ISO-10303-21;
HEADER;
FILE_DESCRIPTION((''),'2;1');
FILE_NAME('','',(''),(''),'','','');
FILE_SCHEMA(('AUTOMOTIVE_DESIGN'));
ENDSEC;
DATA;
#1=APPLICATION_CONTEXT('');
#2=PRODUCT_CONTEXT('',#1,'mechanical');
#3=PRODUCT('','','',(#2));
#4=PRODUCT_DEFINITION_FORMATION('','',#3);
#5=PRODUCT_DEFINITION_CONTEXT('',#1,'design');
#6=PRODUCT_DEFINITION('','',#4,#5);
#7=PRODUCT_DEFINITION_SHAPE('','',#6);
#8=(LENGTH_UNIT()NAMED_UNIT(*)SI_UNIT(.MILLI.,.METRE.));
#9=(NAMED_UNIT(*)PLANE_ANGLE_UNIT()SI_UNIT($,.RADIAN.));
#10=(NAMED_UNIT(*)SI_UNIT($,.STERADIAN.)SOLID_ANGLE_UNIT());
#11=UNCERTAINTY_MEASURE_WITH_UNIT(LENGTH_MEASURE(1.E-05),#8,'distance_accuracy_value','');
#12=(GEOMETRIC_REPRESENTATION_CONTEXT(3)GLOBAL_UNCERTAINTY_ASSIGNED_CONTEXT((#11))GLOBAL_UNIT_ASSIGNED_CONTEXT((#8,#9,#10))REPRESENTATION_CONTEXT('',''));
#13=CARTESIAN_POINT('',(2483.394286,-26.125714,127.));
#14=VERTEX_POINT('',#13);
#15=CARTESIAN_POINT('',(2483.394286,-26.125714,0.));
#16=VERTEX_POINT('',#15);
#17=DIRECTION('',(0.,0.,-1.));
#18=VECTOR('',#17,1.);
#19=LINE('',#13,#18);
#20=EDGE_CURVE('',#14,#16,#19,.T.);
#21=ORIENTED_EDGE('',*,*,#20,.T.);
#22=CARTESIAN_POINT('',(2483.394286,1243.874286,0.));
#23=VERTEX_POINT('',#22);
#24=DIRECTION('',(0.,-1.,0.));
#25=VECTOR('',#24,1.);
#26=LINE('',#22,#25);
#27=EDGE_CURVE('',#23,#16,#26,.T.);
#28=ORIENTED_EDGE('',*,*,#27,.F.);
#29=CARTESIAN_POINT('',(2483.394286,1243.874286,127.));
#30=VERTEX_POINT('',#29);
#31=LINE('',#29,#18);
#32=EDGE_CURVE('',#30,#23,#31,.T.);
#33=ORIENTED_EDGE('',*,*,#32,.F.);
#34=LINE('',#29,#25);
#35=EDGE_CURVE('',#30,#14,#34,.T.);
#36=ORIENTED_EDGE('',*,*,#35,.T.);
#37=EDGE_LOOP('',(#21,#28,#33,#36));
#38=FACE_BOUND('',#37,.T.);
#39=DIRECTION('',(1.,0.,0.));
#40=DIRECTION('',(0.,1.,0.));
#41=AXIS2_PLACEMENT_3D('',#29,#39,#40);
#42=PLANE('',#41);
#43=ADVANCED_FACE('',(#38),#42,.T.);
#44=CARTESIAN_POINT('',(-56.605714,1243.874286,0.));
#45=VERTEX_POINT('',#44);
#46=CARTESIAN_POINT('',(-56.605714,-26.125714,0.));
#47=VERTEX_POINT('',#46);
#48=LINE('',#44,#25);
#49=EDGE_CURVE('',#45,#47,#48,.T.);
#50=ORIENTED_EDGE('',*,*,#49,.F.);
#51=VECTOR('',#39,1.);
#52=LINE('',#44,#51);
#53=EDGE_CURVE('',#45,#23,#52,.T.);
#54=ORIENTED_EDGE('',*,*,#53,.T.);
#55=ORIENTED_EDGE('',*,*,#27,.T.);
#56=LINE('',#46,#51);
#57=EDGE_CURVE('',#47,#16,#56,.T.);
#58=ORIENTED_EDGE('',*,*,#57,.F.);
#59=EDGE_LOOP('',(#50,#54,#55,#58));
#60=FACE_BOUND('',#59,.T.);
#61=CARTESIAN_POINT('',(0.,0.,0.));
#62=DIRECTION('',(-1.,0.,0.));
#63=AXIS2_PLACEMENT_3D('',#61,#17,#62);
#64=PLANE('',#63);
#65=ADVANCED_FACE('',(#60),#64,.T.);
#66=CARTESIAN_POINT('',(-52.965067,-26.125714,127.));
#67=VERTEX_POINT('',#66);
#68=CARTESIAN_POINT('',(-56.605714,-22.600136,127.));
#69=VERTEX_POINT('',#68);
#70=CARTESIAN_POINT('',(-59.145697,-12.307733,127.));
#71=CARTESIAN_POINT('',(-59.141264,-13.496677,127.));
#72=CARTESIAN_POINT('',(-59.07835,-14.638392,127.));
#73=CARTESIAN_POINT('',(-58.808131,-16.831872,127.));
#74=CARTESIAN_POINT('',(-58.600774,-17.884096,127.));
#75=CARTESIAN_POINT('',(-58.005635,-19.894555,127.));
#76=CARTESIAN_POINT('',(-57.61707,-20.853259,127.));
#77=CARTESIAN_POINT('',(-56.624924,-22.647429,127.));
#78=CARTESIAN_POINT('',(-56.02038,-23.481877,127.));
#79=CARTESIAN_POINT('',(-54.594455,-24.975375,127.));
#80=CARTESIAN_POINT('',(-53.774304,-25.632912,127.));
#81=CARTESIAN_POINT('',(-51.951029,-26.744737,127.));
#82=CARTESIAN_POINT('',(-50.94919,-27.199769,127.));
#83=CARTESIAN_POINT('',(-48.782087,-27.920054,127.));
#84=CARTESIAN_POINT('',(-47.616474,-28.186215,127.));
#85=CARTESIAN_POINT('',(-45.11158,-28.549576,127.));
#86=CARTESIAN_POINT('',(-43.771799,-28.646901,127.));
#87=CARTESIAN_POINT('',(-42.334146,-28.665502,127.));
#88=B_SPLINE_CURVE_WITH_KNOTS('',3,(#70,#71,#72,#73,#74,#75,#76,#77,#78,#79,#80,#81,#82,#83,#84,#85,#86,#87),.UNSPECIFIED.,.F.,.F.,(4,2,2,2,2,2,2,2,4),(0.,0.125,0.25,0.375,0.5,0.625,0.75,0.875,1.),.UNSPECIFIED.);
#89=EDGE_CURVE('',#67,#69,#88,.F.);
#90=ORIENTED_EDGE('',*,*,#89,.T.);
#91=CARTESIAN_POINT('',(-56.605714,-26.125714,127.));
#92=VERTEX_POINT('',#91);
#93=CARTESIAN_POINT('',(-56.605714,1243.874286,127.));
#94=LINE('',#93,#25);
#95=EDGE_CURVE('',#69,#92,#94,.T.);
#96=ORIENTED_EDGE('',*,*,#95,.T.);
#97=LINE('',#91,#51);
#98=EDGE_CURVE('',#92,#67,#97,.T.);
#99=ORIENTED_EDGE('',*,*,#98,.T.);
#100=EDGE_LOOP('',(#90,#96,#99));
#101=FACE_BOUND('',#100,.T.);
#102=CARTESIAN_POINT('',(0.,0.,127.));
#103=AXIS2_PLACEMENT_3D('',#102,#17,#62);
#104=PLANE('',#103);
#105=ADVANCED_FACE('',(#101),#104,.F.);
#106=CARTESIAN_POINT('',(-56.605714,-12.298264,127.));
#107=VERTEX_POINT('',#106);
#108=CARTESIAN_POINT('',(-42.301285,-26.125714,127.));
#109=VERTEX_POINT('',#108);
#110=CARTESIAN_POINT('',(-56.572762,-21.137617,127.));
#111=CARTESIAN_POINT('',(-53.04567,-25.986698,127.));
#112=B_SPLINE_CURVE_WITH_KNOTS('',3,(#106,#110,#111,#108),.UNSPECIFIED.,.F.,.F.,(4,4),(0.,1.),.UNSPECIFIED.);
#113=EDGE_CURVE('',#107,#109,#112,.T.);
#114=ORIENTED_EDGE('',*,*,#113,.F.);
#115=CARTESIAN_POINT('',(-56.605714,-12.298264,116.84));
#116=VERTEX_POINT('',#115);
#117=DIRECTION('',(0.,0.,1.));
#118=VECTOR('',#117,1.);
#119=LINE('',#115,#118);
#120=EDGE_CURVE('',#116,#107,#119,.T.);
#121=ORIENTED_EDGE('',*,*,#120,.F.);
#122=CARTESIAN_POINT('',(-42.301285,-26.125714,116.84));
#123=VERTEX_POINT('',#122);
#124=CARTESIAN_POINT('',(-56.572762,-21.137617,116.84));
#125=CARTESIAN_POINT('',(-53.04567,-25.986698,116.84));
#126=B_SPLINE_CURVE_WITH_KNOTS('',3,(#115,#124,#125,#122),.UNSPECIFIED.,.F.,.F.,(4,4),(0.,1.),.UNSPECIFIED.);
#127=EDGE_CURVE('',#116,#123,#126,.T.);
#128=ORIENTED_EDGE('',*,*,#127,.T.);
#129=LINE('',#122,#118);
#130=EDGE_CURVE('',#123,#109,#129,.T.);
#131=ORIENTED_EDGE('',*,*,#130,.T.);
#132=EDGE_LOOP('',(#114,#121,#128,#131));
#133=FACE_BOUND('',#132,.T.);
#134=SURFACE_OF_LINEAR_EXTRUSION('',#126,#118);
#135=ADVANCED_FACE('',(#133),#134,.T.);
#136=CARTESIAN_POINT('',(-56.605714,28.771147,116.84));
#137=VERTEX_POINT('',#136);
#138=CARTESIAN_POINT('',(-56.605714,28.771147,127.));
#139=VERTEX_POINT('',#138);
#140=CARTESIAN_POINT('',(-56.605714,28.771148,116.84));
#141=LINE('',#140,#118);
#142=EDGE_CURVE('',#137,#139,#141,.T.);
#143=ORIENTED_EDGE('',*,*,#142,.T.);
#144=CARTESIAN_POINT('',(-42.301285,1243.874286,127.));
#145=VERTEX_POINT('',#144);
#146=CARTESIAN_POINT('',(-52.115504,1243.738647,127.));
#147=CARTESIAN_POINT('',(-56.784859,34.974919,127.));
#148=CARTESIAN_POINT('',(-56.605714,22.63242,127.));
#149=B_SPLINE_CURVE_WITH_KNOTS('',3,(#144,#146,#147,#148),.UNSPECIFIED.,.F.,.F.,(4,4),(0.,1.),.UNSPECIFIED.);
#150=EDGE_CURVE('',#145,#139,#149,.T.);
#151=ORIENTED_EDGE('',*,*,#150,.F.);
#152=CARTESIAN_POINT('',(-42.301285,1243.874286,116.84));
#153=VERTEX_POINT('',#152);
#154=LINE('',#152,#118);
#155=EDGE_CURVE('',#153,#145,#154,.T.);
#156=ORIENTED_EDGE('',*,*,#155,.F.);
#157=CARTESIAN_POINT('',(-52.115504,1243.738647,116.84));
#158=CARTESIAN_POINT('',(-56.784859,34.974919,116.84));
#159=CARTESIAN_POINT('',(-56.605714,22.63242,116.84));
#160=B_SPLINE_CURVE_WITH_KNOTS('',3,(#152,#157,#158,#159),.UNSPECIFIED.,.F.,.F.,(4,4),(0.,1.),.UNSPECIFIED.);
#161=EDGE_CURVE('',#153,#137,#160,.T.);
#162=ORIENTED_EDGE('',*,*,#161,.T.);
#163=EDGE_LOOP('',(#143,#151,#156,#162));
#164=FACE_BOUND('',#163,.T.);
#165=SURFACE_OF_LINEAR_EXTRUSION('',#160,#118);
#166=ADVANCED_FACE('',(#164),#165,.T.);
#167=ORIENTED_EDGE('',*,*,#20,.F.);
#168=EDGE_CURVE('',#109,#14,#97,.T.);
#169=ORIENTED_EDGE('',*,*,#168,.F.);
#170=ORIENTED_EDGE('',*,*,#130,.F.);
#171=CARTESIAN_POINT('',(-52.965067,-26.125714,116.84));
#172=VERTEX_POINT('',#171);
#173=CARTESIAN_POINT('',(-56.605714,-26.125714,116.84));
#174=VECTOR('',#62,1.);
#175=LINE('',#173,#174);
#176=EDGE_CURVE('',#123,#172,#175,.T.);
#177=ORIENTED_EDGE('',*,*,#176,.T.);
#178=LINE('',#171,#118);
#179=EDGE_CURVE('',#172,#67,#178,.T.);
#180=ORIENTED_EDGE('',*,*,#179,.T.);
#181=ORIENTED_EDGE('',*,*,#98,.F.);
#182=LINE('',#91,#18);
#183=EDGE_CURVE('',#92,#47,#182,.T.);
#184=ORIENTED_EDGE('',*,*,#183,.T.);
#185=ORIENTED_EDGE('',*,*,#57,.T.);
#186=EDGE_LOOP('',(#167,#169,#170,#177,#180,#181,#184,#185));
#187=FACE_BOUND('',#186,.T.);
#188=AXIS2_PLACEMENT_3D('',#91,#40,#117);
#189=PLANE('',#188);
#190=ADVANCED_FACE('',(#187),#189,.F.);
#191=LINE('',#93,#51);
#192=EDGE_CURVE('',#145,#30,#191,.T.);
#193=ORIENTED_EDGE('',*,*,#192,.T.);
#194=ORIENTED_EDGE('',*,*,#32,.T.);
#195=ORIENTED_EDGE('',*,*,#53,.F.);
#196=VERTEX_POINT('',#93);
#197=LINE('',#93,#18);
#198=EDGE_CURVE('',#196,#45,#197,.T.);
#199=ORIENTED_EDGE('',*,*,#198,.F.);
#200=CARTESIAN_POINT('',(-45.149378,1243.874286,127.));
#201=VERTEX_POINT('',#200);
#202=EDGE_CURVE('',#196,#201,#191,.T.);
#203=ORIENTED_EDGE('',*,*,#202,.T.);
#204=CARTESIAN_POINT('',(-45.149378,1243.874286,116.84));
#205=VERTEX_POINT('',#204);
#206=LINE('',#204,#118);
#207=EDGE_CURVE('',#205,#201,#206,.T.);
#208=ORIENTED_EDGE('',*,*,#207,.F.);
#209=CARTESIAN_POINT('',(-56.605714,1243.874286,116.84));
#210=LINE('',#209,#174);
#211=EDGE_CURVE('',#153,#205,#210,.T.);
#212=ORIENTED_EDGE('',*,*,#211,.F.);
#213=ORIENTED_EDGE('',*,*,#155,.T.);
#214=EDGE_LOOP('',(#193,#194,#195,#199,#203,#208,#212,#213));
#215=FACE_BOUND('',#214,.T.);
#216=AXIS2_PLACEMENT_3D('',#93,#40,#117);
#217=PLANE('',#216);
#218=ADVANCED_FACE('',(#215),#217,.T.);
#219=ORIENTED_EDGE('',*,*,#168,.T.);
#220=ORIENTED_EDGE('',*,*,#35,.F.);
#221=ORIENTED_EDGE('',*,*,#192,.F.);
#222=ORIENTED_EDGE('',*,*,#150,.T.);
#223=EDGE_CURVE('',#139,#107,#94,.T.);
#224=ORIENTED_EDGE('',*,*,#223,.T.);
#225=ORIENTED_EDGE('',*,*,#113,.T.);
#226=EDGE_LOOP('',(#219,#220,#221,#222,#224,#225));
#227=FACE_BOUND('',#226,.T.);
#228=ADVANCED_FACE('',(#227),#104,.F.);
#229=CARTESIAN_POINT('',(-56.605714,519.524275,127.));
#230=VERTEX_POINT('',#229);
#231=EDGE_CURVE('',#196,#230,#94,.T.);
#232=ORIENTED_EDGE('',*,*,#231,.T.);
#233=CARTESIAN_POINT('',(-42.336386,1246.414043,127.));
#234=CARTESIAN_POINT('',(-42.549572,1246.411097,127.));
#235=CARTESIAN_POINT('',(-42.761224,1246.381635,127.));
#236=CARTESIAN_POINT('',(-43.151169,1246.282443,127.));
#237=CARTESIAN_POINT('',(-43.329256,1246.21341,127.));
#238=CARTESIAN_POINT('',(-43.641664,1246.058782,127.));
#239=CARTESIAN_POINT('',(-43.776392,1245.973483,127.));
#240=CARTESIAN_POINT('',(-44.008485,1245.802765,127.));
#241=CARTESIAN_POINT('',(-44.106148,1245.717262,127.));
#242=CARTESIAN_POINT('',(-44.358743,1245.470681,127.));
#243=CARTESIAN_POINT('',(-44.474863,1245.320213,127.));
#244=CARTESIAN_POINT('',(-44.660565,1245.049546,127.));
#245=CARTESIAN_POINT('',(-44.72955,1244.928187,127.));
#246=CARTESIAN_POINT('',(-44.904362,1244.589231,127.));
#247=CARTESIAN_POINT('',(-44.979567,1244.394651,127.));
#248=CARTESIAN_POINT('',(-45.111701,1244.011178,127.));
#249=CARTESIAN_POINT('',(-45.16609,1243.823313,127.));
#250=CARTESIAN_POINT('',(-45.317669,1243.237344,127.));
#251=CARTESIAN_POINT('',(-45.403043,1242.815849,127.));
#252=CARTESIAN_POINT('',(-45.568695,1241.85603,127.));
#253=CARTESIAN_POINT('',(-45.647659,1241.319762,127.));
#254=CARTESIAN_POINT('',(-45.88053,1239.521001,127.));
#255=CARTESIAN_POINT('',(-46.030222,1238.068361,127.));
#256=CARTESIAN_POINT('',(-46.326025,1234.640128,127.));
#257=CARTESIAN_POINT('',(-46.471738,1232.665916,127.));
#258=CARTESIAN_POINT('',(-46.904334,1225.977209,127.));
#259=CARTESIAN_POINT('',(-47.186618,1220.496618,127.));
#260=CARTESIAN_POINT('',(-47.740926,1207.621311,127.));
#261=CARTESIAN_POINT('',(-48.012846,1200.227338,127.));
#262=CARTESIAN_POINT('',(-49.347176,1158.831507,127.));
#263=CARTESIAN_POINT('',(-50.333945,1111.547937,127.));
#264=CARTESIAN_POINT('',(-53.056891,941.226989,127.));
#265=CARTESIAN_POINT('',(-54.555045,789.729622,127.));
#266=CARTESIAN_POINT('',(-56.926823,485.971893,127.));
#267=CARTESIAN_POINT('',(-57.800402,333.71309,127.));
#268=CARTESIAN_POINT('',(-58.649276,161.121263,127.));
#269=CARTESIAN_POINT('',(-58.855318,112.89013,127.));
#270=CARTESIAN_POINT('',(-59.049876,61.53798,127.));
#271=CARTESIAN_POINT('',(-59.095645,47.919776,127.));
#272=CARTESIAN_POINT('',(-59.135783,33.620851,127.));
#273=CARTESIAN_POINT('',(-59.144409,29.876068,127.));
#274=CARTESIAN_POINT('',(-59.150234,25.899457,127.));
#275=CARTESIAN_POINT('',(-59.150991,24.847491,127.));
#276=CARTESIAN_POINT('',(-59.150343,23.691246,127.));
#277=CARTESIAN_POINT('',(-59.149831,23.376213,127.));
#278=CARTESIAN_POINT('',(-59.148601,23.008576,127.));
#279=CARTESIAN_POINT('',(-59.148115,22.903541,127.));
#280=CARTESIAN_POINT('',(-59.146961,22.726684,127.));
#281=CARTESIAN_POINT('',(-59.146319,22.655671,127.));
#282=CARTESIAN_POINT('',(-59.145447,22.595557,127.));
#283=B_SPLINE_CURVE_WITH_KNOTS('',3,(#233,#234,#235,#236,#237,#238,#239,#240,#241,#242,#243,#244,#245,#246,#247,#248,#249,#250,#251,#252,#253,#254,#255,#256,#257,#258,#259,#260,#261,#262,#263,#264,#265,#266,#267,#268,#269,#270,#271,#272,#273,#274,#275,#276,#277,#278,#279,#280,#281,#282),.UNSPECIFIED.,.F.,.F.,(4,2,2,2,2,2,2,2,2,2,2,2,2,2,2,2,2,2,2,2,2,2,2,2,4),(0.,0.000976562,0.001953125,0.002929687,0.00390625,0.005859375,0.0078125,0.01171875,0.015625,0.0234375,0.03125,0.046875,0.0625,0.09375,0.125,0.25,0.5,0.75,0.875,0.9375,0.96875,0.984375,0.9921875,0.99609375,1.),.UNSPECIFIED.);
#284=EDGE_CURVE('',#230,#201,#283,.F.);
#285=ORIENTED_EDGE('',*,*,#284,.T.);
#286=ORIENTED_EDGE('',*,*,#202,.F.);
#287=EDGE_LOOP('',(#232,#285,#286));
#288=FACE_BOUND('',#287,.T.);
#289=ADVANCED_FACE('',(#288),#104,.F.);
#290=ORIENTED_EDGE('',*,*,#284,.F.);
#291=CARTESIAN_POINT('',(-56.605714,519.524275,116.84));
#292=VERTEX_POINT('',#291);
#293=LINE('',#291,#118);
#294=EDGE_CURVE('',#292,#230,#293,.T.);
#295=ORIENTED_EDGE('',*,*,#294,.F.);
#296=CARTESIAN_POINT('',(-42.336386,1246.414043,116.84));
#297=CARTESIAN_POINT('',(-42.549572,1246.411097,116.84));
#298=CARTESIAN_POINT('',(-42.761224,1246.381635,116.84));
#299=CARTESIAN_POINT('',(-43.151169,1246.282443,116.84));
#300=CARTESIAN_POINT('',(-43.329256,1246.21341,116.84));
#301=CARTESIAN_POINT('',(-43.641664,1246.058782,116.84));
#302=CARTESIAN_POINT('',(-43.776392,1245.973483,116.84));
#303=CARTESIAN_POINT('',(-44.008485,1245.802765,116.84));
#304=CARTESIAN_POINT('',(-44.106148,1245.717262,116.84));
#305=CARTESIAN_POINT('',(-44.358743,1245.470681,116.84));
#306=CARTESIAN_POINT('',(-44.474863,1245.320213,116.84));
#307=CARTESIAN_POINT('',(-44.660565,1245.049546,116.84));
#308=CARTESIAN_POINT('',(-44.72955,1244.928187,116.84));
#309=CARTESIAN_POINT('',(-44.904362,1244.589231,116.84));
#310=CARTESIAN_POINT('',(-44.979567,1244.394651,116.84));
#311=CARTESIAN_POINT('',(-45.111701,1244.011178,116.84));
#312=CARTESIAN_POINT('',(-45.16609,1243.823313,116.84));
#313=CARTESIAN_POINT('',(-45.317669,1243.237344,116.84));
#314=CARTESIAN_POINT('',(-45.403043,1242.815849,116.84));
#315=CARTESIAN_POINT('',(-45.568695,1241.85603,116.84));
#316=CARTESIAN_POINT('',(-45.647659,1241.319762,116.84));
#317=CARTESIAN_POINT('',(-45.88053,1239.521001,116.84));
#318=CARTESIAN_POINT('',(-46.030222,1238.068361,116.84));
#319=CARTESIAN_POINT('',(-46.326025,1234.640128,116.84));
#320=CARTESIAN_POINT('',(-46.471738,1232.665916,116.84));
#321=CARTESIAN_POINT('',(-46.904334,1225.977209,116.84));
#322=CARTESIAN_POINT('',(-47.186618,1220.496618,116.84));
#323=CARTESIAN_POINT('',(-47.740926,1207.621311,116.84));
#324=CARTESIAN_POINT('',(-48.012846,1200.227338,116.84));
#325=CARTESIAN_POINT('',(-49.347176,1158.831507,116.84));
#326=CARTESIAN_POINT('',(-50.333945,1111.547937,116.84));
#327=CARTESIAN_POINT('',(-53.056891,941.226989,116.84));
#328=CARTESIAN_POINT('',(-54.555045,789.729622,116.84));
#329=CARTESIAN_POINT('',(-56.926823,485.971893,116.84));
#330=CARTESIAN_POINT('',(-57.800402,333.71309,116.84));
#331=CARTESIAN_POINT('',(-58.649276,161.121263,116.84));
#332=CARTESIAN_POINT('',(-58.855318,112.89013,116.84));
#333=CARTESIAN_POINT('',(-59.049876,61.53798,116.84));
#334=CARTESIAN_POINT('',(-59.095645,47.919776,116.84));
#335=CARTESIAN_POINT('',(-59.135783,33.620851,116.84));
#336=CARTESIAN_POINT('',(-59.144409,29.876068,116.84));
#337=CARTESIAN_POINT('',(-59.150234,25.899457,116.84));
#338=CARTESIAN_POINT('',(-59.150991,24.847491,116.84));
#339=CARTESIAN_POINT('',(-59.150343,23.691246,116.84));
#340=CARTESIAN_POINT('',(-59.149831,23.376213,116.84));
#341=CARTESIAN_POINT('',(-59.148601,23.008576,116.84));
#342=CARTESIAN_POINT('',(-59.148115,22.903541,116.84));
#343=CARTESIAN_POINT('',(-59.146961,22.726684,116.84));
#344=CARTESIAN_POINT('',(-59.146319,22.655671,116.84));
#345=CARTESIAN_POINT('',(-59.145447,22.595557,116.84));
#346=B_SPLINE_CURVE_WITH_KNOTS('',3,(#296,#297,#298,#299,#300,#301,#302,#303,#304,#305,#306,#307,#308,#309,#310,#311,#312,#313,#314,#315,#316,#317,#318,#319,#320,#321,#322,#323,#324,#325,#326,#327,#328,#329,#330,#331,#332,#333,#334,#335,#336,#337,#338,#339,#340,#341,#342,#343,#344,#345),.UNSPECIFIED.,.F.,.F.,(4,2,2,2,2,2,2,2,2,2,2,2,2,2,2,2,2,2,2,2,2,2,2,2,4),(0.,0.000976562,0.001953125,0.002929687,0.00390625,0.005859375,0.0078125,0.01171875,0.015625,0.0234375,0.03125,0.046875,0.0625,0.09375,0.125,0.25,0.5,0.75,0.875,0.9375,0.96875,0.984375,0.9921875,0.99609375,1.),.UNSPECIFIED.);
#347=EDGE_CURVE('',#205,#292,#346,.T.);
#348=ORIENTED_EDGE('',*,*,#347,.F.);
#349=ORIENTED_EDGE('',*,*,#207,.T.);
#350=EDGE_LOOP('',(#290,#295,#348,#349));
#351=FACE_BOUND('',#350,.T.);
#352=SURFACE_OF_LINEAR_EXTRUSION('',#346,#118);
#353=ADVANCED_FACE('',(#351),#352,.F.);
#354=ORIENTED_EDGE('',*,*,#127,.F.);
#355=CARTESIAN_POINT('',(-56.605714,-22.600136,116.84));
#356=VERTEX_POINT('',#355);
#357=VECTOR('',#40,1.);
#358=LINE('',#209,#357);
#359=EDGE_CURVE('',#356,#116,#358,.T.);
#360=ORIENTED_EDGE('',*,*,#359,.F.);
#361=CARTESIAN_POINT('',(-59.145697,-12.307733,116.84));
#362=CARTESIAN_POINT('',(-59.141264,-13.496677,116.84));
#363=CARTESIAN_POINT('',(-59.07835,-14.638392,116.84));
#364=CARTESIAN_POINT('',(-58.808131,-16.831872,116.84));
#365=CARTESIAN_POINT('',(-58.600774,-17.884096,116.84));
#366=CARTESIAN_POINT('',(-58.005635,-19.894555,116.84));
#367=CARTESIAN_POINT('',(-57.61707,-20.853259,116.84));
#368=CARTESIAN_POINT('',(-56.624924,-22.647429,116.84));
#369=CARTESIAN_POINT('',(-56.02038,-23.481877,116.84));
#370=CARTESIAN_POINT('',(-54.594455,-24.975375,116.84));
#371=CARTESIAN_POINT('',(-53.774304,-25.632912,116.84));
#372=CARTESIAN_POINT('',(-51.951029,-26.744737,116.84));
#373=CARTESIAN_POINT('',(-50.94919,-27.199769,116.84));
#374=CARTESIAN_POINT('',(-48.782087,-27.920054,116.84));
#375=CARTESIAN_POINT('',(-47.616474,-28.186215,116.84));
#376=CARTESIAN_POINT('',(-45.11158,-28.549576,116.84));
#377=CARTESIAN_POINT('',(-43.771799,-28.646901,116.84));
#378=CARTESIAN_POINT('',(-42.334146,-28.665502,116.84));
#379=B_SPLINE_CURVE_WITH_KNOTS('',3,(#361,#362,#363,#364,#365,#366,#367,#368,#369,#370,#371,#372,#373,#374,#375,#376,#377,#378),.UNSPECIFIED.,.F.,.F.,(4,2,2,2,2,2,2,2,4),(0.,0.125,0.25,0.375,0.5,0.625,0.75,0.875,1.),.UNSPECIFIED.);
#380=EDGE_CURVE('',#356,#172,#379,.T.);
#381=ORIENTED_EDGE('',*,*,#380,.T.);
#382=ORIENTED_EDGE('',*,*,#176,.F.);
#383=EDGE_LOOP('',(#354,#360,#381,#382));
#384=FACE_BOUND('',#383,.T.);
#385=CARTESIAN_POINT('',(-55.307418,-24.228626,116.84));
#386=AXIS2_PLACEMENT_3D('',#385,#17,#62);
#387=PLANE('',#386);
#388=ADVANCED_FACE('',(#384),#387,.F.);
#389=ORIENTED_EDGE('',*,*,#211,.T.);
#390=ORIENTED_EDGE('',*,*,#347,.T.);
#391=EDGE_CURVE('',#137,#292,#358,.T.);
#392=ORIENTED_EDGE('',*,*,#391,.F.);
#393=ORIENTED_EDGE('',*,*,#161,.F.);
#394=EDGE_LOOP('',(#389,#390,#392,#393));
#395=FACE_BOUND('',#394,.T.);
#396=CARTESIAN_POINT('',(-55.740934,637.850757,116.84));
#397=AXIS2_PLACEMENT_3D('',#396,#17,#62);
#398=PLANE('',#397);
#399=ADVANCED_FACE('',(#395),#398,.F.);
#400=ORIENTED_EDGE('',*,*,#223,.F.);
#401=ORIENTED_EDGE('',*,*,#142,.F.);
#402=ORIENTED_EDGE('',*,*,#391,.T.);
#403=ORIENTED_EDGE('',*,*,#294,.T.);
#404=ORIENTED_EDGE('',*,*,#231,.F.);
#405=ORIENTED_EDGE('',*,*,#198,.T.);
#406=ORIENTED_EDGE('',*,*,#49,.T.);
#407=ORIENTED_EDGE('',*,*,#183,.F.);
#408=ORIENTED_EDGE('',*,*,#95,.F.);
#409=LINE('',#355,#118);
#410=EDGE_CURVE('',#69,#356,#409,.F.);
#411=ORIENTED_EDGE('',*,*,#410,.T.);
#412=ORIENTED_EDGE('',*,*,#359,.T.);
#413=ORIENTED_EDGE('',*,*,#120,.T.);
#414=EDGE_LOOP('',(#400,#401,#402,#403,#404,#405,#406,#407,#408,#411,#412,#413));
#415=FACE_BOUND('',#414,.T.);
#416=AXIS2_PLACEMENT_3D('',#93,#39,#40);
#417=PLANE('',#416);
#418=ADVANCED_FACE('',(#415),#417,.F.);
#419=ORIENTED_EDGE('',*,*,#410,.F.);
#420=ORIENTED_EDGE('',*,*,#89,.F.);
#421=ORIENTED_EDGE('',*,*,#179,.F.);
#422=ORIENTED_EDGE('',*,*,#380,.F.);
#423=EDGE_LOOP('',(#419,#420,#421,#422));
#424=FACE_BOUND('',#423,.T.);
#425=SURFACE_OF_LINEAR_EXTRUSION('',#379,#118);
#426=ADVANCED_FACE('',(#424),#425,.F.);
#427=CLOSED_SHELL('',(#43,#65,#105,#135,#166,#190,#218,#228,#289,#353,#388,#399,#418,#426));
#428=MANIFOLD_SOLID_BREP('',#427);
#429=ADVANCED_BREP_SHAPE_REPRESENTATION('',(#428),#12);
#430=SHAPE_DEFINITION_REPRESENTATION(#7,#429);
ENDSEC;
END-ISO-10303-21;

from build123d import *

# Parameters (mm, degrees)
SKETCH2_W               = 2540
SKETCH2_H               = 1270
BOSS_EXTRUDE1_DEPTH     = 127
CUT_EXTRUDE_THIN7_START = -10.16
CUT_EXTRUDE_THIN7_DEPTH = 10.16


# Read off the part's stored shape, not the designer's step: Cut-Extrude-Thin7
with BuildPart() as part:
    # Sketch2 → Boss-Extrude1 (new body)
    with BuildSketch(Plane.XY):
        with Locations((1213.394285714, 608.874285714)):
            Rectangle(SKETCH2_W, SKETCH2_H)
    extrude(amount=BOSS_EXTRUDE1_DEPTH)

    # Cut-Extrude-Thin7 outline → Cut-Extrude-Thin7 (cut)
    with BuildSketch(Plane.XY.offset(127).offset(CUT_EXTRUDE_THIN7_START)):
        with BuildLine():
            Line((-56.605714286, -12.298264237), (-56.605714286, -22.600135555))
            add(Edge.make_bspline(
                [(-56.605714286, -22.600135555), (-56.222595532, -23.177940395), (-55.789824429, -23.723358369), (-54.621251066, -24.947308754), (-53.835801705, -25.583360111), (-52.965066872, -26.125714295)],
                knots=[0.415422097, 0.415422097, 0.415422097, 0.415422097, 0.5, 0.5, 0.620302006, 0.620302006, 0.620302006, 0.620302006], degree=3))
            Line((-52.965066872, -26.125714295), (-42.301285071, -26.125714286))
            add(Edge.make_bspline(
                [(-56.605714286, -12.298264237), (-56.572762187, -21.137617087), (-53.045670494, -25.98669824), (-42.301285071, -26.125714286)],
                knots=[0, 0, 0, 0, 1, 1, 1, 1], degree=3))
        make_face()
        with BuildLine():
            Line((-56.605714286, 519.524275061), (-56.605714288, 28.771147167))
            add(Edge.make_bspline(
                [(-42.301285071, 1243.874285714), (-51.75315576, 1243.743654698), (-56.433053692, 122.584401155), (-56.605714288, 28.771147167)],
                knots=[0, 0, 0, 0, 0.963079213, 0.963079213, 0.963079213, 0.963079213], degree=3))
            Line((-42.301285071, 1243.874285714), (-45.149377592, 1243.874285724))
            add(Edge.make_bspline(
                [(-45.149377592, 1243.874285724), (-45.172892669, 1243.792956079), (-45.19510448, 1243.711148911), (-45.317669219, 1243.237343993), (-45.403042669, 1242.815848994), (-45.568694933, 1241.856029834), (-45.647658785, 1241.319762305), (-45.880529985, 1239.521000622), (-46.030221772, 1238.068360897), (-46.326025387, 1234.640128323), (-46.471737542, 1232.665915968), (-46.904334267, 1225.977209037), (-47.186617939, 1220.49661804), (-47.740926489, 1207.621310865), (-48.012846197, 1200.227338063), (-49.347176032, 1158.83150694), (-50.333944851, 1111.5479368), (-53.056891367, 941.226989356), (-54.555044994, 789.729621863), (-56.050439857, 598.211796401), (-56.338672434, 558.546955358), (-56.605714286, 519.524275061)],
                knots=[0.013961909, 0.013961909, 0.013961909, 0.013961909, 0.015625, 0.015625, 0.0234375, 0.0234375, 0.03125, 0.03125, 0.046875, 0.046875, 0.0625, 0.0625, 0.09375, 0.09375, 0.125, 0.125, 0.25, 0.25, 0.5, 0.5, 0.565247658, 0.565247658, 0.565247658, 0.565247658], degree=3))
        make_face()
    extrude(amount=CUT_EXTRUDE_THIN7_DEPTH, mode=Mode.SUBTRACT)


solid = part.part
